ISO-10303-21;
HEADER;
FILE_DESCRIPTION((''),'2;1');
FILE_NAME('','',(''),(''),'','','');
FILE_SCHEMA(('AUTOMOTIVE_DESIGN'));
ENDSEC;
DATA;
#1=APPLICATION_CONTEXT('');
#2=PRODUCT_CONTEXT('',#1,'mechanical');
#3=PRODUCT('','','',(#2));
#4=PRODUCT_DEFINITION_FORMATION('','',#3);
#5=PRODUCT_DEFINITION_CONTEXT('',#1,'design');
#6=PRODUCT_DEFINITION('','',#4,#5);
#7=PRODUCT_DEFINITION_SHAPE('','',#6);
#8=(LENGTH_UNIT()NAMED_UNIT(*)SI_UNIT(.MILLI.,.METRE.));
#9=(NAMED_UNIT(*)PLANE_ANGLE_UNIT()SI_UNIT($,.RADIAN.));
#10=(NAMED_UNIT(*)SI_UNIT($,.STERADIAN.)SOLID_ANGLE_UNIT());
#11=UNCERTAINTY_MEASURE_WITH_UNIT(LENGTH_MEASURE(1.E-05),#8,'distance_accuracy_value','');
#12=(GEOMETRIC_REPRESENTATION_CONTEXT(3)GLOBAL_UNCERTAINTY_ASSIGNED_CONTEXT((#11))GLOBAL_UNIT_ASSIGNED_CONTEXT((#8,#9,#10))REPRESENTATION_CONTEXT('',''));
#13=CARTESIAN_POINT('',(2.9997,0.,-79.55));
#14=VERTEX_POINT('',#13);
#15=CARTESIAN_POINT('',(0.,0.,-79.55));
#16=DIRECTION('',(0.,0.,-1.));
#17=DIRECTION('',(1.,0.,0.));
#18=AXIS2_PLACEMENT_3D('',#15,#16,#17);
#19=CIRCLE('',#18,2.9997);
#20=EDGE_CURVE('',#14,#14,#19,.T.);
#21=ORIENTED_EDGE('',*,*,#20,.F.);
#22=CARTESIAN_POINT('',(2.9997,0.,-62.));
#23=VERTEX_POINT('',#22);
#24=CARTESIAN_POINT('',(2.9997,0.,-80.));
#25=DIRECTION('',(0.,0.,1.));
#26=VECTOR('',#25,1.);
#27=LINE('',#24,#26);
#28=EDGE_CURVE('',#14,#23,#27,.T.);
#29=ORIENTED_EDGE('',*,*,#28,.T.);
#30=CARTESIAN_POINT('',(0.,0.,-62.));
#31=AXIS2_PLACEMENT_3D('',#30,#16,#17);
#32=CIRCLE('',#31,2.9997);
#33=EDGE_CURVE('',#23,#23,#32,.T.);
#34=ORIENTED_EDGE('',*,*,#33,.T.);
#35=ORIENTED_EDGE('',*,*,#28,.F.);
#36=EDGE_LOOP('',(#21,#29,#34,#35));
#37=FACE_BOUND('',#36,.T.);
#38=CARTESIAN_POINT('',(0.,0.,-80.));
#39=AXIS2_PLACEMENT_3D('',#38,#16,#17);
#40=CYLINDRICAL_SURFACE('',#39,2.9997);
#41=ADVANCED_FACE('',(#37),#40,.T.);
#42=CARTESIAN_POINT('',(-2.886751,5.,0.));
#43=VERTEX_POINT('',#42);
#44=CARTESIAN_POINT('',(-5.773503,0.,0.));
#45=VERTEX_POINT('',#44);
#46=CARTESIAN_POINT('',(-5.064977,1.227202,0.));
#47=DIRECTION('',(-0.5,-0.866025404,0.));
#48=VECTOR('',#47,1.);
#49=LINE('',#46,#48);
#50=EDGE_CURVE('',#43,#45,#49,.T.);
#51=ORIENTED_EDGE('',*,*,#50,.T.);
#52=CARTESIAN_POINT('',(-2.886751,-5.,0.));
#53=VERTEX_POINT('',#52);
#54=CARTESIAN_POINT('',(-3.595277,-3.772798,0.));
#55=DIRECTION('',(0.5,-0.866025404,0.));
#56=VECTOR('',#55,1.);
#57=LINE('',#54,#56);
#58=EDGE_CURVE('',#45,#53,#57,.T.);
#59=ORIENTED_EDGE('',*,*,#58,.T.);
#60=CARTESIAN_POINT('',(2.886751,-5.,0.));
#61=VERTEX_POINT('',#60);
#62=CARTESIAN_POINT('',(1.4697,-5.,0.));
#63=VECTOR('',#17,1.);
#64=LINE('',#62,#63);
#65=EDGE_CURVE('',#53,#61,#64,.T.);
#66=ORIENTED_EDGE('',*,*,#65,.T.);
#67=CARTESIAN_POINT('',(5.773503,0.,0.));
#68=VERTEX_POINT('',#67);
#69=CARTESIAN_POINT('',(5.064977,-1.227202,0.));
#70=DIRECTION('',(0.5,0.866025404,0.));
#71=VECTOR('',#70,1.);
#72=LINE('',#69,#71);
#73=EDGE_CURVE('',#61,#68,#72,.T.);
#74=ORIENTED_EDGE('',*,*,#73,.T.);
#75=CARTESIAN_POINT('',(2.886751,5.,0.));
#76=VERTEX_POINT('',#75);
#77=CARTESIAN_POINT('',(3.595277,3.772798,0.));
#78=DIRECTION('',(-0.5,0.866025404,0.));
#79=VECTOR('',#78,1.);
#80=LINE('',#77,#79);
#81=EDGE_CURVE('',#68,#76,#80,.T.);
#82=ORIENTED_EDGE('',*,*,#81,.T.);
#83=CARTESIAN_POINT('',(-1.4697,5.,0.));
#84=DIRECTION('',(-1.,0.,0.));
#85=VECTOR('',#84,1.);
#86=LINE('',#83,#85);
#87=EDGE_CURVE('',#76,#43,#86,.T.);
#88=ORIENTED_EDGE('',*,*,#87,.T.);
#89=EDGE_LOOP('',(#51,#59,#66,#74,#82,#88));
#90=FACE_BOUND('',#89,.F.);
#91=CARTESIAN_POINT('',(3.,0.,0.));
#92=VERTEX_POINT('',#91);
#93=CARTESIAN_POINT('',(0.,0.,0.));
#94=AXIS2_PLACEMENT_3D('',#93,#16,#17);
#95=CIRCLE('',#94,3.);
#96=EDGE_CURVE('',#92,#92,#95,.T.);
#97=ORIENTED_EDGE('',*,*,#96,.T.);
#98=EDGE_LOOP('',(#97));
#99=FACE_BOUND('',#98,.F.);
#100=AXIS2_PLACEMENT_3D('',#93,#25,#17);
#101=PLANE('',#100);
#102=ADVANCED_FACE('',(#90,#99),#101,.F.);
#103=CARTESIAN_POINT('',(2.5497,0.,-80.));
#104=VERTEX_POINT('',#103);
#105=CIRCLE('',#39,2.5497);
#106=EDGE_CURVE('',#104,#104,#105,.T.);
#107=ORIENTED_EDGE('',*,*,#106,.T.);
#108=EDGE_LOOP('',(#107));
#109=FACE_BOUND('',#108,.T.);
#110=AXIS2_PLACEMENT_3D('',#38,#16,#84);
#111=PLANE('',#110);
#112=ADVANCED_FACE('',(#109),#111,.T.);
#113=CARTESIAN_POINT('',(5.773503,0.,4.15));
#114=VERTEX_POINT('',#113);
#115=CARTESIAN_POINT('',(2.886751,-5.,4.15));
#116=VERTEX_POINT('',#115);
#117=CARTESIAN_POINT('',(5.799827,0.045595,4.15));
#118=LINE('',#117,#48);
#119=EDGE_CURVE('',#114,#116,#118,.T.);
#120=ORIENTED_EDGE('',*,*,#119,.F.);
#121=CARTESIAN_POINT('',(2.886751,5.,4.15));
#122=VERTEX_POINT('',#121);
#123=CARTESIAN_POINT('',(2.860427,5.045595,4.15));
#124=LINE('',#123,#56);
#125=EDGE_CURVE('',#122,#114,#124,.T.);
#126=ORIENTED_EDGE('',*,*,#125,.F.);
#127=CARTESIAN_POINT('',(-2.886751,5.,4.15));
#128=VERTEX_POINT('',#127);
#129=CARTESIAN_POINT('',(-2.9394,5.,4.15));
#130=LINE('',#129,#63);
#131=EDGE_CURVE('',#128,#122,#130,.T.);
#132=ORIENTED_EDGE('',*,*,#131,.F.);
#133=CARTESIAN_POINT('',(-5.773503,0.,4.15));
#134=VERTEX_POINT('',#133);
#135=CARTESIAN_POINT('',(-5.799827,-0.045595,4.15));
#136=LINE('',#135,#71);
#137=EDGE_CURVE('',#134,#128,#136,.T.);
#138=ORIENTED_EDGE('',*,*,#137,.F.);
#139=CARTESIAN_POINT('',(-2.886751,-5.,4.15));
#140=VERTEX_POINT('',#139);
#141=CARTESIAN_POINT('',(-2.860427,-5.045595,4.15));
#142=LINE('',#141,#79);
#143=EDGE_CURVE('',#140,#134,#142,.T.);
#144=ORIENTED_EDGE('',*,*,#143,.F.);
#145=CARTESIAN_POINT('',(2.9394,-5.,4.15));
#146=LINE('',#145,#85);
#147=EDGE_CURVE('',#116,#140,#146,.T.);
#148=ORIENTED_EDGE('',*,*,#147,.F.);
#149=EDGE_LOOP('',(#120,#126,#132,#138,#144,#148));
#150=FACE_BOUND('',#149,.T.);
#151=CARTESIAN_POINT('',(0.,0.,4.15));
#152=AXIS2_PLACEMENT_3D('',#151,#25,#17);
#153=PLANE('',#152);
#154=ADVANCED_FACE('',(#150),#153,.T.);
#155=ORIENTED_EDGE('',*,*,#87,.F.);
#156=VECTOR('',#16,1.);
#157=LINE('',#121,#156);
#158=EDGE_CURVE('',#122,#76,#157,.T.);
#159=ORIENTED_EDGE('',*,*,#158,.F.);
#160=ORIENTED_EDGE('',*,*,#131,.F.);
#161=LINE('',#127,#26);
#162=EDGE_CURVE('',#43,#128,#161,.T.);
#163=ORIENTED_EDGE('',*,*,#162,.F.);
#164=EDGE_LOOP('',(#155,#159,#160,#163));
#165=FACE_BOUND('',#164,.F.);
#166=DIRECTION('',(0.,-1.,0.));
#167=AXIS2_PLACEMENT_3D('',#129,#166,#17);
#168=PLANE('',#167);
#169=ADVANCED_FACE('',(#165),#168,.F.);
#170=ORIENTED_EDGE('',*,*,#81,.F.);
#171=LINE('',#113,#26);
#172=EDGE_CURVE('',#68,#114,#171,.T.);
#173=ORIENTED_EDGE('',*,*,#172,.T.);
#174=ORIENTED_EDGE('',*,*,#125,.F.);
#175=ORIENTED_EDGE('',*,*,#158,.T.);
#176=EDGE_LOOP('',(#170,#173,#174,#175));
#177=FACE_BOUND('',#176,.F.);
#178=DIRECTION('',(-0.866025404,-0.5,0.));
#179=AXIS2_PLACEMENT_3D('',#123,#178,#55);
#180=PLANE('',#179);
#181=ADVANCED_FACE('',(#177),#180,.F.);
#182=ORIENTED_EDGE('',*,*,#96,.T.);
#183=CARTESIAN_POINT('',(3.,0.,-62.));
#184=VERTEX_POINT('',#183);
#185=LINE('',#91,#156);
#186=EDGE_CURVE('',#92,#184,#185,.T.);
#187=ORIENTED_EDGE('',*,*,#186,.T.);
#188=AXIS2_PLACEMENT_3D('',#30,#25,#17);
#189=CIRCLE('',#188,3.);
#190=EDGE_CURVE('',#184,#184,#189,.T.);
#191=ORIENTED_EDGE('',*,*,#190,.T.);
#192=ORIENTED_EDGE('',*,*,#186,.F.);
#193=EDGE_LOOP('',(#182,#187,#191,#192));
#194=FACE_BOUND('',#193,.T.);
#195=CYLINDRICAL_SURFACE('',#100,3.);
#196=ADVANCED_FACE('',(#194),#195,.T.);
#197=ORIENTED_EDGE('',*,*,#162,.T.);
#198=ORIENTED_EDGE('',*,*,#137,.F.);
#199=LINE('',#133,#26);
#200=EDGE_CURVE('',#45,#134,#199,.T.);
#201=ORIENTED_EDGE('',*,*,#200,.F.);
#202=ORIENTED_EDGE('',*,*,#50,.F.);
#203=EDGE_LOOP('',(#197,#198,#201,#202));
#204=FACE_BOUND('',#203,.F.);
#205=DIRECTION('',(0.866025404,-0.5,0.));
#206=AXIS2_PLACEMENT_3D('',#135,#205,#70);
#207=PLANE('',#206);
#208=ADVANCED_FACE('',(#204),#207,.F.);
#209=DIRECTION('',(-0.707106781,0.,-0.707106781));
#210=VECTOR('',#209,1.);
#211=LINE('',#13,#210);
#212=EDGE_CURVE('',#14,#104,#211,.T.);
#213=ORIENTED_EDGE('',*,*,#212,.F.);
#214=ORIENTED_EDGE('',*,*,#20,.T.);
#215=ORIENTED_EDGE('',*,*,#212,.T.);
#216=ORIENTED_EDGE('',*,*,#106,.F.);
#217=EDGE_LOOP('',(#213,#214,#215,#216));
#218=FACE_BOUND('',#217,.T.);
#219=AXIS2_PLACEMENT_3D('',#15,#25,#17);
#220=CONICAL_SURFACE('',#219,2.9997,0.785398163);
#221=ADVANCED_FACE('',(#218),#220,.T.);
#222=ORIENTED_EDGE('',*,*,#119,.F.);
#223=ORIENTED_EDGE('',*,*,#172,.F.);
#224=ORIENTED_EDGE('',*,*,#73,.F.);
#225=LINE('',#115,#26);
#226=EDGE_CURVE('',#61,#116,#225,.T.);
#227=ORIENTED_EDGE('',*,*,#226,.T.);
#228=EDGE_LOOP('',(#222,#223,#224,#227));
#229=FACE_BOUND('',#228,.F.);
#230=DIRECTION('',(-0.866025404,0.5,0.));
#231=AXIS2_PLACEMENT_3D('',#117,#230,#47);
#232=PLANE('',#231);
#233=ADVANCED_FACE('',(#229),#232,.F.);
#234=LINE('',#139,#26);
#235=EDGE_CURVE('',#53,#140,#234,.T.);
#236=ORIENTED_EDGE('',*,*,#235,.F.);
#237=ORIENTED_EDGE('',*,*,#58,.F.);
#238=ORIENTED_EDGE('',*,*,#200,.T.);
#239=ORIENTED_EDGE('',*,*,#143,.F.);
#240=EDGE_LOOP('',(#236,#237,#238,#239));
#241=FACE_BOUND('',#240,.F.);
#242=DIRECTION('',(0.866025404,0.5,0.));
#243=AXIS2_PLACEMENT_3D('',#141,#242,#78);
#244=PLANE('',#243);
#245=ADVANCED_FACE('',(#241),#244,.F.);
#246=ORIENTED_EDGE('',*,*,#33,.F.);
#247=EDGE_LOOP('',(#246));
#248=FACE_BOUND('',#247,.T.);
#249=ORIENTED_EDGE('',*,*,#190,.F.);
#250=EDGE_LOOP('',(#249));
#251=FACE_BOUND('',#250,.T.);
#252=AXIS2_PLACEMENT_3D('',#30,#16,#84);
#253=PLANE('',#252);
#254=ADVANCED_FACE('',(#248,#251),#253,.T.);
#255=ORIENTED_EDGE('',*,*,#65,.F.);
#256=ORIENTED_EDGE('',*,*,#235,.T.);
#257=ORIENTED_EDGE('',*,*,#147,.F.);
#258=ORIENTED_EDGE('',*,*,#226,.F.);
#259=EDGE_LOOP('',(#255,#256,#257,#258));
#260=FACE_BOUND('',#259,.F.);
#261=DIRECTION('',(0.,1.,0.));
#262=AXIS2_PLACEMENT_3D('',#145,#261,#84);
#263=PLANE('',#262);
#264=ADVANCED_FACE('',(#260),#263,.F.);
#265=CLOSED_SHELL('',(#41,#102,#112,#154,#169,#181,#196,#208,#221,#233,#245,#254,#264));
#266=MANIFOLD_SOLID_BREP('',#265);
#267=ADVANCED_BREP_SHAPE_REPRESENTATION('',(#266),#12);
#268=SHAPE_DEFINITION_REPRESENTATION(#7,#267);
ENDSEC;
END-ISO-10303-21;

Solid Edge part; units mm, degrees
sketch "Sketch1" plane through (0, 0, 0) normal (0, 0, 1) x (1, 0, 0)
  circle A0 centre (0, 0) radius 5.8
  dimension "D1" = 11.6
extrude "Protrusion1" add sketch "Sketch1" along normal blind 4.15
sketch "Sketch2" plane through (0, 0, 0) normal (0, 0, -1) x (1, 0, 0)
  circle A0 centre (0, 0) radius 3
extrude "Protrusion2" add sketch "Sketch2" along normal blind 80
sketch "Sketch3" plane through (0, 0, -80) normal (0, 0, -1) x (1, 0, 0)
  circle A0 centre (0, 0) radius 2.9997
extrude "Cutout1" cut sketch "Sketch3" against normal blind 18 flip side to cut
chamfer "Chamfer_1" distance 0.45 angle 45 1 edges at (-2.9997, 0, -80)
sketch "Sketch4" plane through (0, 0, 4.15) normal (0, 0, 1) x (1, 0, 0)
  line L0 (-2.9394, 5) -> (2.9394, 5)
  dimension "D1" = 10
extrude "Cutout2" cut sketch "Sketch4" against normal up to next material side at (0, 5.05, 4.15)
pattern_circular "Pattern1" count 6 over 360 about axis through (0, 0, 4.15) along (0, 0, 1) of "Cutout2"
properties part number "24104501"
